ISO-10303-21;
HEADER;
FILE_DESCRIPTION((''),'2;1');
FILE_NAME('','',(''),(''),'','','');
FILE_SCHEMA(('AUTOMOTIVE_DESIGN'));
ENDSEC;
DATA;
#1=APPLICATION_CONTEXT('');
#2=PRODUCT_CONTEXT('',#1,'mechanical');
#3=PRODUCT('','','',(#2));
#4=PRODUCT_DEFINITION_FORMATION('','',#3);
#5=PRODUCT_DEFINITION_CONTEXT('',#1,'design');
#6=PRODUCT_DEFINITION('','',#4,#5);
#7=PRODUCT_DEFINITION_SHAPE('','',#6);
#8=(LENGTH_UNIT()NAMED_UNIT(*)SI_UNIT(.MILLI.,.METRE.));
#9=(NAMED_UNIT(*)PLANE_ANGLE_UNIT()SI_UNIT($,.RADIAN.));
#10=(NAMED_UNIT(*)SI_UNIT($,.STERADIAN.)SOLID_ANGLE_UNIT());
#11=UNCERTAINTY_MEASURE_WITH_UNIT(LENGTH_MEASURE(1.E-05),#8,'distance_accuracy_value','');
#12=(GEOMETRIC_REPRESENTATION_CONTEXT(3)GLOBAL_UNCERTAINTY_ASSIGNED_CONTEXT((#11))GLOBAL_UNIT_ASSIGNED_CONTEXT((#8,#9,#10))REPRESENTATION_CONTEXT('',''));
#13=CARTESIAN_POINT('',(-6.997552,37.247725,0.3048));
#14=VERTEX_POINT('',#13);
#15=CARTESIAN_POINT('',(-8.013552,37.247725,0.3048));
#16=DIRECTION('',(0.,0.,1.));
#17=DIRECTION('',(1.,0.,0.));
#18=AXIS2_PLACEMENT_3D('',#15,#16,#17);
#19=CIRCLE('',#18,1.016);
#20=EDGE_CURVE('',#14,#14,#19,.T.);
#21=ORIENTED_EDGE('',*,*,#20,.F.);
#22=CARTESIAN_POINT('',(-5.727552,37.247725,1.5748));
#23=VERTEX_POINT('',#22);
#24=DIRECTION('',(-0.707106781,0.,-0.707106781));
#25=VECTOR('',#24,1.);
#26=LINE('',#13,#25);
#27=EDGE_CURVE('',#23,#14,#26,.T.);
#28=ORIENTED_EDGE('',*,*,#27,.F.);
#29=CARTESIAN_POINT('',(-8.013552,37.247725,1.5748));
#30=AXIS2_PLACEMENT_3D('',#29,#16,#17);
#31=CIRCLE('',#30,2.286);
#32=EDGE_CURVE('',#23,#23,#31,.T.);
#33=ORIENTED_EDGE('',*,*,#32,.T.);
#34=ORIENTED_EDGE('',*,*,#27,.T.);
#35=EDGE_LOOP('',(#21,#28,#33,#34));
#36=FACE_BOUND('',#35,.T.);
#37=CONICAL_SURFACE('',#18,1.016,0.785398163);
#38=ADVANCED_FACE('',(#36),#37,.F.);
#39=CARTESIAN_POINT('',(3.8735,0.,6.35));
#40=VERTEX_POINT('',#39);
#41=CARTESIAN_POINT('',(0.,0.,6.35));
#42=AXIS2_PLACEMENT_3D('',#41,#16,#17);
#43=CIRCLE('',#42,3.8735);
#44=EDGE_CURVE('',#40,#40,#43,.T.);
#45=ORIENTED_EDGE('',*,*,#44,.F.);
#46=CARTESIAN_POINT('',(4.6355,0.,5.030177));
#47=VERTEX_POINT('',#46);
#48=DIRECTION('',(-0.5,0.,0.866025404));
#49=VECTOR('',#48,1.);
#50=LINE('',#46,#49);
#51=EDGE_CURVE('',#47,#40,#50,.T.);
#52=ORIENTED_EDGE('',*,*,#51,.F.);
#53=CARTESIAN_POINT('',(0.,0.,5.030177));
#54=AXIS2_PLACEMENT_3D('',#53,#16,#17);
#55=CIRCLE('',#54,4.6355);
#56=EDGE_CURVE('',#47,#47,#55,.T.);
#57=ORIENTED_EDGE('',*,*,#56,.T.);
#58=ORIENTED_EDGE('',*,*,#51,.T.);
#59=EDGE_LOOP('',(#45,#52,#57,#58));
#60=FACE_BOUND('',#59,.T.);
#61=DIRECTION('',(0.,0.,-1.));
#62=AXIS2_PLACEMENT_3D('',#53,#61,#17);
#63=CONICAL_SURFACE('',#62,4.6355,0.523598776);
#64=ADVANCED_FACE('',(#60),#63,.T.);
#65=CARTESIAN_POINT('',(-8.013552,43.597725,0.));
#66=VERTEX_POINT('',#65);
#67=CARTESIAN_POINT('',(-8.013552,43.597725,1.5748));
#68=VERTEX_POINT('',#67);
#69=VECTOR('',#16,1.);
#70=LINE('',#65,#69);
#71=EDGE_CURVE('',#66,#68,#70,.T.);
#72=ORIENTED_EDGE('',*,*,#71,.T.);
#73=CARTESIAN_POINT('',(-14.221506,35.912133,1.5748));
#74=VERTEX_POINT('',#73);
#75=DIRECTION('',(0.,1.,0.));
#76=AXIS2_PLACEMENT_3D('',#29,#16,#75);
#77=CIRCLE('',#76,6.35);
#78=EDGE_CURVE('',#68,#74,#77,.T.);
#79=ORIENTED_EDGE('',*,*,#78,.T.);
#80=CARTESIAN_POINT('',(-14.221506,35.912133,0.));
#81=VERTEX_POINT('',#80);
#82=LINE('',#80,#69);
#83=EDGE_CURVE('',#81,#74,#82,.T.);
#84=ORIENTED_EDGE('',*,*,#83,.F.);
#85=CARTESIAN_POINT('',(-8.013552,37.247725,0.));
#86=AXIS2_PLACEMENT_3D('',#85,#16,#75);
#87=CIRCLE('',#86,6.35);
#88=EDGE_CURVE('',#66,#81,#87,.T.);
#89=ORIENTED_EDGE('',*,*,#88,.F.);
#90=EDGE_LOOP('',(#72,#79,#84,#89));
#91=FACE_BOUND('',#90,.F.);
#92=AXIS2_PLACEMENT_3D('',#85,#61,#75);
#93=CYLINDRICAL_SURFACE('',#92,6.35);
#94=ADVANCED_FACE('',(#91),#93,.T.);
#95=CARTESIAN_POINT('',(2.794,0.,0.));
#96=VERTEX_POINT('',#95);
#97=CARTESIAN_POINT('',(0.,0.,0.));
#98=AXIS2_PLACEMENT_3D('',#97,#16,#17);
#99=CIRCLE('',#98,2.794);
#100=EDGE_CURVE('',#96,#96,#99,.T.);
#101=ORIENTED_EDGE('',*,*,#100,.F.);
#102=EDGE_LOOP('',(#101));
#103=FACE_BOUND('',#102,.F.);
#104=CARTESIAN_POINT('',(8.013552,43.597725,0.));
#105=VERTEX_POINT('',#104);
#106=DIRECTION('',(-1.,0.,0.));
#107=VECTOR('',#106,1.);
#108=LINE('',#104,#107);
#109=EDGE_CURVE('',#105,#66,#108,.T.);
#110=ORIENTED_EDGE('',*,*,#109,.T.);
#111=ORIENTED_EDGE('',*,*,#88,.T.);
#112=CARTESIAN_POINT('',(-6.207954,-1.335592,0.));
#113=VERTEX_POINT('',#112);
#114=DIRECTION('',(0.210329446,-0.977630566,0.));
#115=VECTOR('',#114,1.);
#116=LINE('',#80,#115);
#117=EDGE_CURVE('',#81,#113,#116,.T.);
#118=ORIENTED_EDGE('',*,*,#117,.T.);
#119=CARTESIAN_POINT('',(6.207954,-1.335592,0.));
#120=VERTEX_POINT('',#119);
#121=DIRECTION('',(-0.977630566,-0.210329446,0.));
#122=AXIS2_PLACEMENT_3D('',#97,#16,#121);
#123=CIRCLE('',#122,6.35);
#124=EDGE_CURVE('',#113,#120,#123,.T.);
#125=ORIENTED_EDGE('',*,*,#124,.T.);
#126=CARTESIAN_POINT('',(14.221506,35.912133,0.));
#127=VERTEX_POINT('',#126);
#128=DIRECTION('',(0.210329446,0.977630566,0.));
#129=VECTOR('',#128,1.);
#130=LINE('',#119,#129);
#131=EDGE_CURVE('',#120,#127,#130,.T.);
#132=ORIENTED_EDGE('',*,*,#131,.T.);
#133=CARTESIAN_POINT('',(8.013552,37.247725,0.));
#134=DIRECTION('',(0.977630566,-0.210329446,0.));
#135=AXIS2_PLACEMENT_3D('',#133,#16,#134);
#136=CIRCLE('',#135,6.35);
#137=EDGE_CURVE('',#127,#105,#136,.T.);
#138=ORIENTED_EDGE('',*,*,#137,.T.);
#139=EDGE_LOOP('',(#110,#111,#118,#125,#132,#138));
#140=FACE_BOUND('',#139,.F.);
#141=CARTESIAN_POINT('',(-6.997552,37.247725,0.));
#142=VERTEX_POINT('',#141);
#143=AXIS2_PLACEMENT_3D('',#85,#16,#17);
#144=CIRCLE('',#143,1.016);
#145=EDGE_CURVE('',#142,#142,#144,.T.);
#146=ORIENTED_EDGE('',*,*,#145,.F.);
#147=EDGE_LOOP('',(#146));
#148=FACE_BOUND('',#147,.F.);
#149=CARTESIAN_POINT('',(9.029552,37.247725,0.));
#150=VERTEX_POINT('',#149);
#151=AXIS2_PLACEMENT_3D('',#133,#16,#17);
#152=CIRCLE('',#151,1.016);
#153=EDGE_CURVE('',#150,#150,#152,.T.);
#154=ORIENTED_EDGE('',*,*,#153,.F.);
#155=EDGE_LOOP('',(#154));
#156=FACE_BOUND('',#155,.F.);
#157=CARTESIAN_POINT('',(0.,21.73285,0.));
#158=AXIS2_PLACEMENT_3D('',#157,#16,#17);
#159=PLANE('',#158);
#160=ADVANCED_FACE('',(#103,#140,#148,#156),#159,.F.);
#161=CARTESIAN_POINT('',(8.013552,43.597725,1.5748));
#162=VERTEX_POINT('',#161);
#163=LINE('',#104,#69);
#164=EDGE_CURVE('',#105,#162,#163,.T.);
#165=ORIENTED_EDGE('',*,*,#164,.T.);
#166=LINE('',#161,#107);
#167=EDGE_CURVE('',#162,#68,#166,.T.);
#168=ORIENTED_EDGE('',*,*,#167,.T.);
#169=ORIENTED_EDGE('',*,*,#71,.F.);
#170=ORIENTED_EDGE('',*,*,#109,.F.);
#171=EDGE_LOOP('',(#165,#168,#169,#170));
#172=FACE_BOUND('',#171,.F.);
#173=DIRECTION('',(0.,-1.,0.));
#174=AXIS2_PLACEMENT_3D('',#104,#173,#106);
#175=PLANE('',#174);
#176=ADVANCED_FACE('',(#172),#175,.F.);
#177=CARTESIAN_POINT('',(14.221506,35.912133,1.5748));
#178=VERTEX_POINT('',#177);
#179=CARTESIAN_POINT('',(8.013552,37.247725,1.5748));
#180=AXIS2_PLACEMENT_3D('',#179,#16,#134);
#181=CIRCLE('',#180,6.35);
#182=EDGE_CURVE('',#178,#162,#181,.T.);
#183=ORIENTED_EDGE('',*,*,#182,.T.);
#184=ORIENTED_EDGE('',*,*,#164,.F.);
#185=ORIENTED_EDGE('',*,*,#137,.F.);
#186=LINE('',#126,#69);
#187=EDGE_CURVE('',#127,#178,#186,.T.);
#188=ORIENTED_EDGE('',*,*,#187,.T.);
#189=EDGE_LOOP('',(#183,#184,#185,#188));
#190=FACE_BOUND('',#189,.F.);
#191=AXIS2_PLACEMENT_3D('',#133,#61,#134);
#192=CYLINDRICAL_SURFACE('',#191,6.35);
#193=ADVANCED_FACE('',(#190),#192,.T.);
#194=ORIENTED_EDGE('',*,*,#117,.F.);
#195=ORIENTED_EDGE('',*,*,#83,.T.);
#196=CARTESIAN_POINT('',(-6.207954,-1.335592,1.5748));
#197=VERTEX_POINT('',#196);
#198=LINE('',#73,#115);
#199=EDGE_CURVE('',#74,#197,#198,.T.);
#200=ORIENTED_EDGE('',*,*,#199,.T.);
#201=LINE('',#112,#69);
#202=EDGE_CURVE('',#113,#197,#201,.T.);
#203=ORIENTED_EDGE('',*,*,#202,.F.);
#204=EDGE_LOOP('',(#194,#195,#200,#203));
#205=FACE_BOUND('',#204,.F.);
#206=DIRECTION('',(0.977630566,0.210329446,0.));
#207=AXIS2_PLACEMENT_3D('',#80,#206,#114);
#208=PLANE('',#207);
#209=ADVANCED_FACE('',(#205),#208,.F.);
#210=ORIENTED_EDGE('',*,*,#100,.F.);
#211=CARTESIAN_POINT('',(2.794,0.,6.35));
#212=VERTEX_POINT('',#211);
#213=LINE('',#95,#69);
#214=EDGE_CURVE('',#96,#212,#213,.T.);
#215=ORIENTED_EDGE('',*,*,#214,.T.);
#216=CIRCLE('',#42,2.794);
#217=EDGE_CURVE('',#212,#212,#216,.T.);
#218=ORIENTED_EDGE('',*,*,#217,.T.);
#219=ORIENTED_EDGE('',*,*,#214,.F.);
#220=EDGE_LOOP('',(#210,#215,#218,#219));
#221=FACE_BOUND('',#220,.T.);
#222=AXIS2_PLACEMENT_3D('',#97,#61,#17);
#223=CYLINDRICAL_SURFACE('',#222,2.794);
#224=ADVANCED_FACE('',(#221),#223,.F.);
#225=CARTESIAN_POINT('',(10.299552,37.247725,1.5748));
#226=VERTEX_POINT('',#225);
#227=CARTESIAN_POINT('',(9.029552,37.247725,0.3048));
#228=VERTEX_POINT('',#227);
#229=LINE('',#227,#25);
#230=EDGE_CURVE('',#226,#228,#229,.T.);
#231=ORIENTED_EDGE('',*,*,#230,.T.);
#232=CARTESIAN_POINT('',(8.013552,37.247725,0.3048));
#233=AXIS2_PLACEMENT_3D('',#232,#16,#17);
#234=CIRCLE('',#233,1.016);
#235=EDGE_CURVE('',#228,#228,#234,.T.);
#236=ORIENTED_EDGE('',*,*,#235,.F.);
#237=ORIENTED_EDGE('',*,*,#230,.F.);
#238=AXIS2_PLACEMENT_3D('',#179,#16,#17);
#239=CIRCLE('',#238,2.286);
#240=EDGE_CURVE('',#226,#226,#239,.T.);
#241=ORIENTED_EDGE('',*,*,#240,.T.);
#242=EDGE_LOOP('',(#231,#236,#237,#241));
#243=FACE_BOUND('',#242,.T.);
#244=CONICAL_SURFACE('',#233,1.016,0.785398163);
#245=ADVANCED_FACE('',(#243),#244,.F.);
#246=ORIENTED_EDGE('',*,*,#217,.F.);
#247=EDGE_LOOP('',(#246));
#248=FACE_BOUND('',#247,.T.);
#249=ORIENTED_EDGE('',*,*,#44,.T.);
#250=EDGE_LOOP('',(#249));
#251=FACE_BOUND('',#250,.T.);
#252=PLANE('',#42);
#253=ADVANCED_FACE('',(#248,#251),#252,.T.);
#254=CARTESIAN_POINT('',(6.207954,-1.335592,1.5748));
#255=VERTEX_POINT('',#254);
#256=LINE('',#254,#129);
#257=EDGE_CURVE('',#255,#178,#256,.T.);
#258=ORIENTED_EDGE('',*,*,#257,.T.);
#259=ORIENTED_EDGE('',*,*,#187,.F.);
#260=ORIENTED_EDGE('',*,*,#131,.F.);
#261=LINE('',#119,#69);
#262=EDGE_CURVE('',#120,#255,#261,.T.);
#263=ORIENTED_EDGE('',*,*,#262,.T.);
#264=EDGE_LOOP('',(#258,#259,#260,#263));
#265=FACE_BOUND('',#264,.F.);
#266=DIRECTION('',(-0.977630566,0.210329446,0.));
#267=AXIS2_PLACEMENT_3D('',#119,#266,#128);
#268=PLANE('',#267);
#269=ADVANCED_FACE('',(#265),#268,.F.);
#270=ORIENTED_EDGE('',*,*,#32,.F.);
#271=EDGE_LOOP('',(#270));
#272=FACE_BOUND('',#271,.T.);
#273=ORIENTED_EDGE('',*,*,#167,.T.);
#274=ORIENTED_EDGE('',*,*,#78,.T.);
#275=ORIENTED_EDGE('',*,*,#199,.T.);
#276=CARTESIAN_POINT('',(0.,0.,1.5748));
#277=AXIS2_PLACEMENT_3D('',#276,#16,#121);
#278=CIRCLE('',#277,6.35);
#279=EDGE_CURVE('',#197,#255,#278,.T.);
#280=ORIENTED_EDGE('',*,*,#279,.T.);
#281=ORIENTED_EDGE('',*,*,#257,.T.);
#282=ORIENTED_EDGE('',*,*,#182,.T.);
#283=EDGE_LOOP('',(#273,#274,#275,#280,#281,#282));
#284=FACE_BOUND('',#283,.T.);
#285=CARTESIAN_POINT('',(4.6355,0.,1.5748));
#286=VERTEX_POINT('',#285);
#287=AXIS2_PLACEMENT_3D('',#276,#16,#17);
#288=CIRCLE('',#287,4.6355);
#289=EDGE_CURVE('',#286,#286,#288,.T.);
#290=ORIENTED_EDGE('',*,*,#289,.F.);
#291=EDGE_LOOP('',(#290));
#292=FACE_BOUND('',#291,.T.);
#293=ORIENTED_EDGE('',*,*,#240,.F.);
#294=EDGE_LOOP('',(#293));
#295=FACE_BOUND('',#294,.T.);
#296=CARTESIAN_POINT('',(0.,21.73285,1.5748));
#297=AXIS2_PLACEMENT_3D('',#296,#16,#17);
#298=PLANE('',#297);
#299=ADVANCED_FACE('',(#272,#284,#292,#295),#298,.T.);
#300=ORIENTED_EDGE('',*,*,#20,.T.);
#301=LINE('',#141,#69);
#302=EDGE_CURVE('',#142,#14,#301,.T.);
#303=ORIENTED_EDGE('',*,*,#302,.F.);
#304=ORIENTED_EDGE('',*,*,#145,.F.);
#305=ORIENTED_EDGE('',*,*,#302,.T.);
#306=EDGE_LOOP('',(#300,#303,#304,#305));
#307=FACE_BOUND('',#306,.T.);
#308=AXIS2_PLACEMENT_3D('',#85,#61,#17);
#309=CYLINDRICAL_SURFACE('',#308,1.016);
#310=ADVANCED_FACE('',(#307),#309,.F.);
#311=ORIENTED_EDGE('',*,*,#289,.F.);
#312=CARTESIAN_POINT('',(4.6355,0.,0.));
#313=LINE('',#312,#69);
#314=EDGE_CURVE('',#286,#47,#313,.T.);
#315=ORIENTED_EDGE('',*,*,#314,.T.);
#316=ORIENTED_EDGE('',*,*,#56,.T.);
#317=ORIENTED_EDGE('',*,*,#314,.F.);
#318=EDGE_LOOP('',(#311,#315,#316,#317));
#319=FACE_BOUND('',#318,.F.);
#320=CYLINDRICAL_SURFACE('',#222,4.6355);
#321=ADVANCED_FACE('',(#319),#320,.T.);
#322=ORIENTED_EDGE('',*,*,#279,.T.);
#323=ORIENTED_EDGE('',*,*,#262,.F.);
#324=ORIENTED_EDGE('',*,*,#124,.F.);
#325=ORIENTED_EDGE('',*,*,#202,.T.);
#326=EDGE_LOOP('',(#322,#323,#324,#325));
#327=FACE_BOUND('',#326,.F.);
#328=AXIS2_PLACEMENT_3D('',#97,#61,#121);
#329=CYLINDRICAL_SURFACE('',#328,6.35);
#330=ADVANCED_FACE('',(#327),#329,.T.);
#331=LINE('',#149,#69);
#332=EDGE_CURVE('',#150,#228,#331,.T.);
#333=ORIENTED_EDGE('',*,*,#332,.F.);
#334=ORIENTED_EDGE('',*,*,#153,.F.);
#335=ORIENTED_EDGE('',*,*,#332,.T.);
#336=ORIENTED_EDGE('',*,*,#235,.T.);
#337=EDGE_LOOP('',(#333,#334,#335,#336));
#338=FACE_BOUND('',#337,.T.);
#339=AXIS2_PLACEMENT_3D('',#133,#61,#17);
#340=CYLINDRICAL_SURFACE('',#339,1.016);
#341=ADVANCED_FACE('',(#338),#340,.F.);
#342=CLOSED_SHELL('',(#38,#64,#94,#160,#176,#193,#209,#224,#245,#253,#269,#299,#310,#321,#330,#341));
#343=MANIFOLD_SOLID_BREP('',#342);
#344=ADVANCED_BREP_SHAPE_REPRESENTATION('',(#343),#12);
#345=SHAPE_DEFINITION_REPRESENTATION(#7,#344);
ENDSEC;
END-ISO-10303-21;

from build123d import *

# Parameters (mm, degrees)
F0_R     = 4.6355
F0_R_2   = 1.016
F1_DEPTH = 1.5748
F0_R_3   = 2.794
F2_DEPTH = 6.35
F3_SIZE  = 1.27


# Not quite as in the source:
# - a fillet or chamfer that OpenCascade refuses, or shapes differently, is made with other operations: its cross-section is extruded or revolved along the edge and cut away or added
# - a feature names something its author has since deleted; it is built from what else it names


with BuildPart() as f1:
    # F0 (on Top) → F1 (new body)
    with BuildSketch(Plane.XY):
        with BuildLine():
            Line((-14.2215059748, 35.912132599), (-6.2079540965, -1.3355919797))
            ThreePointArc((-6.2079540965, -1.3355919797), (0, -6.35), (6.2079540965, -1.3355919797))
            Line((6.2079540965, -1.3355919797), (14.2215059748, 35.912132599))
            ThreePointArc((14.2215059748, 35.912132599), (12.9533650869, 41.2378054632), (8.0135518783, 43.5977245787))
            Line((8.0135518783, 43.5977245787), (-8.0135518783, 43.5977245787))
            ThreePointArc((-8.0135518783, 43.5977245787), (-12.9533650869, 41.2378054632), (-14.2215059748, 35.912132599))
        make_face()
        Circle(F0_R, mode=Mode.SUBTRACT)
        with Locations((-8.0135518783, 37.2477245787)):
            Circle(F0_R_2, mode=Mode.SUBTRACT)
        with Locations((8.0135518783, 37.2477245787)):
            Circle(F0_R_2, mode=Mode.SUBTRACT)
    extrude(amount=F1_DEPTH)

    # F0 (on Top) → F2 (join)
    with BuildSketch(Plane.XY):
        Circle(F0_R)
        Circle(F0_R_3, mode=Mode.SUBTRACT)
    extrude(amount=F2_DEPTH)

    # F3
    f3_edges = [f1.edges().sort_by_distance(p)[0] for p in [
        (-9.029552, 37.247725, 1.5748),
        (6.997552, 37.247725, 1.5748),
    ]]
    chamfer(f3_edges, length=F3_SIZE)

    # F4: chamfer of 0.762 x 1.3198227154 on 1 edges, made by hand

    # F4_s1 → F4_t2 (revolve, cut)
    with BuildSketch(Plane.XZ):
        Polygon((4.6355, 5.0301772846), (3.8735, 6.35), (4.6355, 6.35), align=None)
    revolve(axis=Axis((0, 0, 6.35), (0, 0, 1)), mode=Mode.SUBTRACT)


solid = f1.part
